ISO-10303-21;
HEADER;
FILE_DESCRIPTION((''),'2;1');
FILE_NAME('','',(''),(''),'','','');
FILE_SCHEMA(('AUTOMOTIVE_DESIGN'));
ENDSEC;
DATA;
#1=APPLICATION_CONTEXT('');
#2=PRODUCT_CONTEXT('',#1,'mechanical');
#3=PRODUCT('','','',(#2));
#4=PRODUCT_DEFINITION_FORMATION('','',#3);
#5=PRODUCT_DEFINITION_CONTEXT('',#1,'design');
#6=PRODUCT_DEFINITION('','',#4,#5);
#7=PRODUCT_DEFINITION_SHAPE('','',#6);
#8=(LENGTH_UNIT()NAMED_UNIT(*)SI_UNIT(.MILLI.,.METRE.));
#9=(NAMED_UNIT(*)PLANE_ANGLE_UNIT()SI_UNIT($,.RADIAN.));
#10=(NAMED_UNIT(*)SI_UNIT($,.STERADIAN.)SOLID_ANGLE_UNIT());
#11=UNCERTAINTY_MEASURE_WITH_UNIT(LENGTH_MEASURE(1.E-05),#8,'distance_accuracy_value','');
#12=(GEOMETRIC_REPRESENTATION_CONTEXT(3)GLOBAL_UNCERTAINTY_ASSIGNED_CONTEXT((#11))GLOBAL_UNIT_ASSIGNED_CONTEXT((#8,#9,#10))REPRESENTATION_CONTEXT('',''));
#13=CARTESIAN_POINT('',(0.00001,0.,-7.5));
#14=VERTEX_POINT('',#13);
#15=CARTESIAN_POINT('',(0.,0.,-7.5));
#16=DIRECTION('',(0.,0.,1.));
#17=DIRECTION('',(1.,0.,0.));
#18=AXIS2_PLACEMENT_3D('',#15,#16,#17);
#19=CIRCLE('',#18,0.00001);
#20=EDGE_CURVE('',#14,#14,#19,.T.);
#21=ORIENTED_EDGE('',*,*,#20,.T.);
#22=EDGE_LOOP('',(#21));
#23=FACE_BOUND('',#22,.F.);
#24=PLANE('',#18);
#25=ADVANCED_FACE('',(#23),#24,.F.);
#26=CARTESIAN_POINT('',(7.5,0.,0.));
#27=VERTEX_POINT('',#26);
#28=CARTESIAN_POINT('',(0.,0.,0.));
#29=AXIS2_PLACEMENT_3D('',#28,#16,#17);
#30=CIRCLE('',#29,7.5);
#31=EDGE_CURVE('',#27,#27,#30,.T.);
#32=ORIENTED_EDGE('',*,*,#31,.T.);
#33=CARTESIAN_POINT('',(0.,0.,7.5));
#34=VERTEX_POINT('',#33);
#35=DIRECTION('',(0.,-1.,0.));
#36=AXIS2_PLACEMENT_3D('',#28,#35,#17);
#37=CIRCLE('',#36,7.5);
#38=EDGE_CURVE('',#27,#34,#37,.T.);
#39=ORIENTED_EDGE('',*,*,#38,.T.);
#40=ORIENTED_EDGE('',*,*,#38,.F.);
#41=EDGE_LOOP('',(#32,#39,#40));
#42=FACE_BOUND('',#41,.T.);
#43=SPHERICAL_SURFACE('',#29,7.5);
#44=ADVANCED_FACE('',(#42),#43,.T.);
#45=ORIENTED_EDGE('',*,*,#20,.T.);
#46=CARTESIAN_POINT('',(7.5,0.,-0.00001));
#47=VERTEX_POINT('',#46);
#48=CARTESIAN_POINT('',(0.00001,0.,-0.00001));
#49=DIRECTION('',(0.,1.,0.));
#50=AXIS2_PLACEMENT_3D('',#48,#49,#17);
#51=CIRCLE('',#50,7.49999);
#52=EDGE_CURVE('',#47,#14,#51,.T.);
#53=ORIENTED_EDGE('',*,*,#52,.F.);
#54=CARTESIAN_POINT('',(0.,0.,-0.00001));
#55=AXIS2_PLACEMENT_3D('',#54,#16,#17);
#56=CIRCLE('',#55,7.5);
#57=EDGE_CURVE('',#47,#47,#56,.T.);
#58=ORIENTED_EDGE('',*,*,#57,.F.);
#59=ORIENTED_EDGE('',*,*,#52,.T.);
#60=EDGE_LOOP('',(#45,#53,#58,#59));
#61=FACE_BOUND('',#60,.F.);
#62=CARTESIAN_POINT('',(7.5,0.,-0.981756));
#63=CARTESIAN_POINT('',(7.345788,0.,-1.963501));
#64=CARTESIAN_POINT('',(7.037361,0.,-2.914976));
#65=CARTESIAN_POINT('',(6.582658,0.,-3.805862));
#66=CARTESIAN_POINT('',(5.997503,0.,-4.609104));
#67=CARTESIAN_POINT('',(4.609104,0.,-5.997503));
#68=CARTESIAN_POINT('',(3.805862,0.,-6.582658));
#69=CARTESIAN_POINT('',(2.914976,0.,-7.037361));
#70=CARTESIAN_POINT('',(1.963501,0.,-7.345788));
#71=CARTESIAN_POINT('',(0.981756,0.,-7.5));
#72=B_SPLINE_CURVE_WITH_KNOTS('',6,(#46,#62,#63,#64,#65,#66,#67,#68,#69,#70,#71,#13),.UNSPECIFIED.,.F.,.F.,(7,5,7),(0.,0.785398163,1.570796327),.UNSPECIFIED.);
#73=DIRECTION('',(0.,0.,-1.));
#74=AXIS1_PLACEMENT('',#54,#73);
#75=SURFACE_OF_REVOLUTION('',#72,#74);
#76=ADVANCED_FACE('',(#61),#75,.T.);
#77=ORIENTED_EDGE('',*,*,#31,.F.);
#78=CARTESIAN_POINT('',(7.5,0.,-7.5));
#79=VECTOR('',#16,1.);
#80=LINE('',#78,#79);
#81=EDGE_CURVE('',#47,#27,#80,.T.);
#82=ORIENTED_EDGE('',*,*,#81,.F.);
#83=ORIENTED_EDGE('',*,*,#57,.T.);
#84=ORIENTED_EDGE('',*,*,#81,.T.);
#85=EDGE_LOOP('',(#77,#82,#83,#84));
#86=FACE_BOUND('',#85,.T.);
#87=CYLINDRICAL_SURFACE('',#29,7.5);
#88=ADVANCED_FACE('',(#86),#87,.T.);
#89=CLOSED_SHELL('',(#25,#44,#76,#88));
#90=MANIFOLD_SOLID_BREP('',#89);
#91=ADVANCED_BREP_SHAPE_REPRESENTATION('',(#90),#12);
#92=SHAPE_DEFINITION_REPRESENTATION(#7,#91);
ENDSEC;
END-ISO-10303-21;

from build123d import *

# Parameters (mm, degrees)
F0_R     = 7.5
F1_DEPTH = 7.5
F2_R     = 7.5
F3_R     = 7.49999


# Not quite as in the source:
# - a fillet or chamfer is up to 0.001 mm smaller than in the source, because OpenCascade refuses the exact size


with BuildPart() as f1:
    # F0 (on Top) → F1 (new body, symmetric)
    with BuildSketch(Plane.XY):
        Circle(F0_R)
    extrude(amount=F1_DEPTH, both=True)

    # F2
    f2_edges = [f1.edges().sort_by_distance(p)[0] for p in [
        (-7.5, 0, 7.5),
    ]]
    fillet(f2_edges, radius=F2_R)

    # F3 (radius 7.5 in the source; OpenCascade refuses exactly that, so slightly less here)
    f3_edges = [f1.edges().sort_by_distance(p)[0] for p in [
        (-7.5, 0, -7.5),
    ]]
    fillet(f3_edges, radius=F3_R)


solid = f1.part
